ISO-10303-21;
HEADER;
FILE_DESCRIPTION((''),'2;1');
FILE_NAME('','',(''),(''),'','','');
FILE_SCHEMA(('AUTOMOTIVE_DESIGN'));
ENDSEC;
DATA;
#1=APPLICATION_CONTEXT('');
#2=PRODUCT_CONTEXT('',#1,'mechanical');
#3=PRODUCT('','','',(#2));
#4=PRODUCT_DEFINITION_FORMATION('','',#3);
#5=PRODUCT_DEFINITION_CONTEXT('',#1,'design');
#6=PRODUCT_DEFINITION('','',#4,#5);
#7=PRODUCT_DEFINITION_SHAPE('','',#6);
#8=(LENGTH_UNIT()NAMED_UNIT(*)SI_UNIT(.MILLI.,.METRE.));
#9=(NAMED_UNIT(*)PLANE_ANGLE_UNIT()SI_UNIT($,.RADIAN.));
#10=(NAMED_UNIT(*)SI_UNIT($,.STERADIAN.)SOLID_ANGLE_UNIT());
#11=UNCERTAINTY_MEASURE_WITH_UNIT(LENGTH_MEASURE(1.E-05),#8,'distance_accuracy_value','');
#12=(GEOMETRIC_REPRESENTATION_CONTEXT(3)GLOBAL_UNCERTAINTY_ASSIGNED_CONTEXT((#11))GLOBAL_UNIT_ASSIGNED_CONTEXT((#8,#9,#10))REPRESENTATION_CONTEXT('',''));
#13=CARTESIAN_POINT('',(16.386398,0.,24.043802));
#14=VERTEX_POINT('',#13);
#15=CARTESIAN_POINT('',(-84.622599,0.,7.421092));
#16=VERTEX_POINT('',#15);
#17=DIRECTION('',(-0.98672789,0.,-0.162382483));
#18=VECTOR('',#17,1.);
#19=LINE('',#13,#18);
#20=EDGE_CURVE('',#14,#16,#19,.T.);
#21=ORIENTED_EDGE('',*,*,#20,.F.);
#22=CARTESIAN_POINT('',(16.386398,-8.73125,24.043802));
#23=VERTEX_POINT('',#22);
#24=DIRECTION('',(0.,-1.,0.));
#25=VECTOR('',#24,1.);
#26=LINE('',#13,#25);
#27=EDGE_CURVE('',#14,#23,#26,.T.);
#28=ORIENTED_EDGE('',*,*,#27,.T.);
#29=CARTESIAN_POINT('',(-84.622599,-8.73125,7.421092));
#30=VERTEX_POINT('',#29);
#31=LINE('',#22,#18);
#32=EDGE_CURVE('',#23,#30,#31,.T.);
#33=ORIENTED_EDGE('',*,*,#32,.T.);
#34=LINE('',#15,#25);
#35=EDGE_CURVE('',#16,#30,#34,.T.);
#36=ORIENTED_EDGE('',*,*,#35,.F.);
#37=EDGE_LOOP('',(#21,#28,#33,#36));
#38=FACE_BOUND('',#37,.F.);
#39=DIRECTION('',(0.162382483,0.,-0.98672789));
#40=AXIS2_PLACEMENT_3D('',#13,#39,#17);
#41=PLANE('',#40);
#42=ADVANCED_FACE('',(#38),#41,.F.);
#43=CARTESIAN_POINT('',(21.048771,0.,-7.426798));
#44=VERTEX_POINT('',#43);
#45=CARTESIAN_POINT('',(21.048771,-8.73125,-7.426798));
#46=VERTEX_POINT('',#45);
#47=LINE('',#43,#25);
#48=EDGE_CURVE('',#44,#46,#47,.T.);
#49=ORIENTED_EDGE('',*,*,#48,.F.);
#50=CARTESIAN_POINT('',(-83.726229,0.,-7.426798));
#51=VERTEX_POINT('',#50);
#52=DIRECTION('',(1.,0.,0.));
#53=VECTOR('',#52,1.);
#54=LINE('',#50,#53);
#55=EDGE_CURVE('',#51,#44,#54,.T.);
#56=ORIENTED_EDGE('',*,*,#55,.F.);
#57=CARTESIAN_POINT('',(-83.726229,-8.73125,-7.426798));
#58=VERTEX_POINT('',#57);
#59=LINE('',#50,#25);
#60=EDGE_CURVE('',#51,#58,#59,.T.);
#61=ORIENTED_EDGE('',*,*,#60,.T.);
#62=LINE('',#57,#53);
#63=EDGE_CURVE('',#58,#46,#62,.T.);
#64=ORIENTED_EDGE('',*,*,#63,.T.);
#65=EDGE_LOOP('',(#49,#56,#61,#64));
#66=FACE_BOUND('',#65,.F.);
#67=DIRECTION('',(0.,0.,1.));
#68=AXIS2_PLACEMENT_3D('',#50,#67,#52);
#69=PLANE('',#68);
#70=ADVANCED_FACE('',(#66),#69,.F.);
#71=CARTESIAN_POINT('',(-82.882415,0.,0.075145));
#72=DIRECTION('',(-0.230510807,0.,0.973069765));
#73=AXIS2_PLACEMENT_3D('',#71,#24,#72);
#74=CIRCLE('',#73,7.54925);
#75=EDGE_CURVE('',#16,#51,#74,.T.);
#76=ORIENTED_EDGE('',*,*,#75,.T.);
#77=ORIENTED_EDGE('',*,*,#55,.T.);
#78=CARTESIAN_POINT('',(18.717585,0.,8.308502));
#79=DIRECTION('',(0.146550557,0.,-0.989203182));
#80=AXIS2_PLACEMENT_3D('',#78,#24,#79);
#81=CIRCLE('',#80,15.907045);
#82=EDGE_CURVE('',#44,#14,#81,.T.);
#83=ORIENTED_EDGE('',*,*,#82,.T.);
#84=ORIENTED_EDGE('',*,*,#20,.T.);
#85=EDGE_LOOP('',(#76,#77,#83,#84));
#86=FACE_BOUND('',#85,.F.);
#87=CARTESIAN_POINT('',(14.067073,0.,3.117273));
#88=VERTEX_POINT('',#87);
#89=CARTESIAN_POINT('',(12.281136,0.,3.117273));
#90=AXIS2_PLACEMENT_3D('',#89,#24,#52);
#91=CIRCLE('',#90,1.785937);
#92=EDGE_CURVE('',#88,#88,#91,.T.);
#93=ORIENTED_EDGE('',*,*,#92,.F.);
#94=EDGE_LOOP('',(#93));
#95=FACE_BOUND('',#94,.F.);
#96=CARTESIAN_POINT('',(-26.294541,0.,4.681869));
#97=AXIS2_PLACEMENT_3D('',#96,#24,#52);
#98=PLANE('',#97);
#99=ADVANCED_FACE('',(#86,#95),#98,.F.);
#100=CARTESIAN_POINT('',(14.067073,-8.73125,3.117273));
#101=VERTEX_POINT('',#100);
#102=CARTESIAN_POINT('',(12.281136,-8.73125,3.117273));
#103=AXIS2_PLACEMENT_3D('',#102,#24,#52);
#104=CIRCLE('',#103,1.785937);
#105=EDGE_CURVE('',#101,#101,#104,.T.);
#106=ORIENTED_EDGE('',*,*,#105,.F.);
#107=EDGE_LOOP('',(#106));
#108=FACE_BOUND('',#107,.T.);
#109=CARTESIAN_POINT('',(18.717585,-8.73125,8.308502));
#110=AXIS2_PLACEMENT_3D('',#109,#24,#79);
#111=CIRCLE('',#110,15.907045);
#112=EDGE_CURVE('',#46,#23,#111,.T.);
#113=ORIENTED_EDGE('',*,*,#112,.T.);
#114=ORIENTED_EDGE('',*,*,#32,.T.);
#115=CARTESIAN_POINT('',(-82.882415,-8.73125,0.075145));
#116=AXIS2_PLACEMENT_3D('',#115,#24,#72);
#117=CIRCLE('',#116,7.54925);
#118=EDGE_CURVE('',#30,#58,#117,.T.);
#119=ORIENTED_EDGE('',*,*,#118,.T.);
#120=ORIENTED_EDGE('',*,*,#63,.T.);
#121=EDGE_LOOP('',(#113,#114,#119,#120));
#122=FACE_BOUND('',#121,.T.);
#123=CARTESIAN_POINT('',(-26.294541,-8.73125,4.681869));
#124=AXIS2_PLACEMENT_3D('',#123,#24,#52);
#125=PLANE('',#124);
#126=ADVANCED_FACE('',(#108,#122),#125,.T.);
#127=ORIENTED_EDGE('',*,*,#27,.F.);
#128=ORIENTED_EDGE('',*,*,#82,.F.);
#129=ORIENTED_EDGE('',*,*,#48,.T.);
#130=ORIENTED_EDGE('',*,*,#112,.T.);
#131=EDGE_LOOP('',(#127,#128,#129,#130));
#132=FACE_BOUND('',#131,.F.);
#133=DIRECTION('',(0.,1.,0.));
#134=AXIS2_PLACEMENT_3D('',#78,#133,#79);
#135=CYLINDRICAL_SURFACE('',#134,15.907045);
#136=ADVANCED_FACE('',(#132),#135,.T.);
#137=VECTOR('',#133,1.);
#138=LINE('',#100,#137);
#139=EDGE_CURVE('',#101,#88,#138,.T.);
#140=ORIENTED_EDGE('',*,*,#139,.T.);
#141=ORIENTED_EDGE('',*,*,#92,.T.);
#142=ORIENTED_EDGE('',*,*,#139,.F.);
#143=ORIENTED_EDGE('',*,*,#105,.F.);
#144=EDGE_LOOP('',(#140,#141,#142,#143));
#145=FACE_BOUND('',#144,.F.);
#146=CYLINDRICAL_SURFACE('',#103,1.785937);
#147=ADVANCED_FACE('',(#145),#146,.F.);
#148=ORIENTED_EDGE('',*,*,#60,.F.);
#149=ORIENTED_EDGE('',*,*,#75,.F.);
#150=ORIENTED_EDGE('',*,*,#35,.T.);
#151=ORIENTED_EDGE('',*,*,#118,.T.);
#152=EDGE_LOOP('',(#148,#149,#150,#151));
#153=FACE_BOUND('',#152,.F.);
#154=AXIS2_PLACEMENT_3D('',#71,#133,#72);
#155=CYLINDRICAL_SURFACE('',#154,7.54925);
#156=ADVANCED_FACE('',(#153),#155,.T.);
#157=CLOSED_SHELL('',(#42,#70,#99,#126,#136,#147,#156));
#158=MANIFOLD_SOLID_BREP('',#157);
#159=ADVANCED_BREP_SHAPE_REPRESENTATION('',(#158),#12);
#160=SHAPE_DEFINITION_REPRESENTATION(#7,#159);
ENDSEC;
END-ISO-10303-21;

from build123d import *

# Parameters (mm, degrees)
F1_DEPTH = 8.73125
F2_R     = 1.7859375
F3_DEPTH = 8.73125


# Not quite as in the source:
# - a length typed as a fraction of an inch, garbled in the dataset ("3 / 203.2 mm" for 3/8 in), is restored


with BuildPart() as f1:
    # F0 (on Front) → F1 (new body)
    with BuildSketch(Plane.XZ):
        with BuildLine():
            Line((16.3863981424, 24.04380231), (-84.6225991332, 7.4210920542))
            ThreePointArc((-84.6225991332, 7.4210920542), (-90.4179458573, -0.3797760525), (-83.7262291187, -7.42679769))
            Line((-83.7262291187, -7.42679769), (21.0487708813, -7.42679769))
            ThreePointArc((21.0487708813, -7.42679769), (34.4528845118, 10.6396886794), (16.3863981424, 24.04380231))
        make_face()
    extrude(amount=F1_DEPTH)

    # F2 (on face) → F3 (cut, through all)
    with BuildSketch(Plane.XZ.offset(8.73125)):
        with Locations((12.2811356559, 3.1172726303)):
            Circle(F2_R)
    extrude(amount=-F3_DEPTH, mode=Mode.SUBTRACT)


solid = f1.part
